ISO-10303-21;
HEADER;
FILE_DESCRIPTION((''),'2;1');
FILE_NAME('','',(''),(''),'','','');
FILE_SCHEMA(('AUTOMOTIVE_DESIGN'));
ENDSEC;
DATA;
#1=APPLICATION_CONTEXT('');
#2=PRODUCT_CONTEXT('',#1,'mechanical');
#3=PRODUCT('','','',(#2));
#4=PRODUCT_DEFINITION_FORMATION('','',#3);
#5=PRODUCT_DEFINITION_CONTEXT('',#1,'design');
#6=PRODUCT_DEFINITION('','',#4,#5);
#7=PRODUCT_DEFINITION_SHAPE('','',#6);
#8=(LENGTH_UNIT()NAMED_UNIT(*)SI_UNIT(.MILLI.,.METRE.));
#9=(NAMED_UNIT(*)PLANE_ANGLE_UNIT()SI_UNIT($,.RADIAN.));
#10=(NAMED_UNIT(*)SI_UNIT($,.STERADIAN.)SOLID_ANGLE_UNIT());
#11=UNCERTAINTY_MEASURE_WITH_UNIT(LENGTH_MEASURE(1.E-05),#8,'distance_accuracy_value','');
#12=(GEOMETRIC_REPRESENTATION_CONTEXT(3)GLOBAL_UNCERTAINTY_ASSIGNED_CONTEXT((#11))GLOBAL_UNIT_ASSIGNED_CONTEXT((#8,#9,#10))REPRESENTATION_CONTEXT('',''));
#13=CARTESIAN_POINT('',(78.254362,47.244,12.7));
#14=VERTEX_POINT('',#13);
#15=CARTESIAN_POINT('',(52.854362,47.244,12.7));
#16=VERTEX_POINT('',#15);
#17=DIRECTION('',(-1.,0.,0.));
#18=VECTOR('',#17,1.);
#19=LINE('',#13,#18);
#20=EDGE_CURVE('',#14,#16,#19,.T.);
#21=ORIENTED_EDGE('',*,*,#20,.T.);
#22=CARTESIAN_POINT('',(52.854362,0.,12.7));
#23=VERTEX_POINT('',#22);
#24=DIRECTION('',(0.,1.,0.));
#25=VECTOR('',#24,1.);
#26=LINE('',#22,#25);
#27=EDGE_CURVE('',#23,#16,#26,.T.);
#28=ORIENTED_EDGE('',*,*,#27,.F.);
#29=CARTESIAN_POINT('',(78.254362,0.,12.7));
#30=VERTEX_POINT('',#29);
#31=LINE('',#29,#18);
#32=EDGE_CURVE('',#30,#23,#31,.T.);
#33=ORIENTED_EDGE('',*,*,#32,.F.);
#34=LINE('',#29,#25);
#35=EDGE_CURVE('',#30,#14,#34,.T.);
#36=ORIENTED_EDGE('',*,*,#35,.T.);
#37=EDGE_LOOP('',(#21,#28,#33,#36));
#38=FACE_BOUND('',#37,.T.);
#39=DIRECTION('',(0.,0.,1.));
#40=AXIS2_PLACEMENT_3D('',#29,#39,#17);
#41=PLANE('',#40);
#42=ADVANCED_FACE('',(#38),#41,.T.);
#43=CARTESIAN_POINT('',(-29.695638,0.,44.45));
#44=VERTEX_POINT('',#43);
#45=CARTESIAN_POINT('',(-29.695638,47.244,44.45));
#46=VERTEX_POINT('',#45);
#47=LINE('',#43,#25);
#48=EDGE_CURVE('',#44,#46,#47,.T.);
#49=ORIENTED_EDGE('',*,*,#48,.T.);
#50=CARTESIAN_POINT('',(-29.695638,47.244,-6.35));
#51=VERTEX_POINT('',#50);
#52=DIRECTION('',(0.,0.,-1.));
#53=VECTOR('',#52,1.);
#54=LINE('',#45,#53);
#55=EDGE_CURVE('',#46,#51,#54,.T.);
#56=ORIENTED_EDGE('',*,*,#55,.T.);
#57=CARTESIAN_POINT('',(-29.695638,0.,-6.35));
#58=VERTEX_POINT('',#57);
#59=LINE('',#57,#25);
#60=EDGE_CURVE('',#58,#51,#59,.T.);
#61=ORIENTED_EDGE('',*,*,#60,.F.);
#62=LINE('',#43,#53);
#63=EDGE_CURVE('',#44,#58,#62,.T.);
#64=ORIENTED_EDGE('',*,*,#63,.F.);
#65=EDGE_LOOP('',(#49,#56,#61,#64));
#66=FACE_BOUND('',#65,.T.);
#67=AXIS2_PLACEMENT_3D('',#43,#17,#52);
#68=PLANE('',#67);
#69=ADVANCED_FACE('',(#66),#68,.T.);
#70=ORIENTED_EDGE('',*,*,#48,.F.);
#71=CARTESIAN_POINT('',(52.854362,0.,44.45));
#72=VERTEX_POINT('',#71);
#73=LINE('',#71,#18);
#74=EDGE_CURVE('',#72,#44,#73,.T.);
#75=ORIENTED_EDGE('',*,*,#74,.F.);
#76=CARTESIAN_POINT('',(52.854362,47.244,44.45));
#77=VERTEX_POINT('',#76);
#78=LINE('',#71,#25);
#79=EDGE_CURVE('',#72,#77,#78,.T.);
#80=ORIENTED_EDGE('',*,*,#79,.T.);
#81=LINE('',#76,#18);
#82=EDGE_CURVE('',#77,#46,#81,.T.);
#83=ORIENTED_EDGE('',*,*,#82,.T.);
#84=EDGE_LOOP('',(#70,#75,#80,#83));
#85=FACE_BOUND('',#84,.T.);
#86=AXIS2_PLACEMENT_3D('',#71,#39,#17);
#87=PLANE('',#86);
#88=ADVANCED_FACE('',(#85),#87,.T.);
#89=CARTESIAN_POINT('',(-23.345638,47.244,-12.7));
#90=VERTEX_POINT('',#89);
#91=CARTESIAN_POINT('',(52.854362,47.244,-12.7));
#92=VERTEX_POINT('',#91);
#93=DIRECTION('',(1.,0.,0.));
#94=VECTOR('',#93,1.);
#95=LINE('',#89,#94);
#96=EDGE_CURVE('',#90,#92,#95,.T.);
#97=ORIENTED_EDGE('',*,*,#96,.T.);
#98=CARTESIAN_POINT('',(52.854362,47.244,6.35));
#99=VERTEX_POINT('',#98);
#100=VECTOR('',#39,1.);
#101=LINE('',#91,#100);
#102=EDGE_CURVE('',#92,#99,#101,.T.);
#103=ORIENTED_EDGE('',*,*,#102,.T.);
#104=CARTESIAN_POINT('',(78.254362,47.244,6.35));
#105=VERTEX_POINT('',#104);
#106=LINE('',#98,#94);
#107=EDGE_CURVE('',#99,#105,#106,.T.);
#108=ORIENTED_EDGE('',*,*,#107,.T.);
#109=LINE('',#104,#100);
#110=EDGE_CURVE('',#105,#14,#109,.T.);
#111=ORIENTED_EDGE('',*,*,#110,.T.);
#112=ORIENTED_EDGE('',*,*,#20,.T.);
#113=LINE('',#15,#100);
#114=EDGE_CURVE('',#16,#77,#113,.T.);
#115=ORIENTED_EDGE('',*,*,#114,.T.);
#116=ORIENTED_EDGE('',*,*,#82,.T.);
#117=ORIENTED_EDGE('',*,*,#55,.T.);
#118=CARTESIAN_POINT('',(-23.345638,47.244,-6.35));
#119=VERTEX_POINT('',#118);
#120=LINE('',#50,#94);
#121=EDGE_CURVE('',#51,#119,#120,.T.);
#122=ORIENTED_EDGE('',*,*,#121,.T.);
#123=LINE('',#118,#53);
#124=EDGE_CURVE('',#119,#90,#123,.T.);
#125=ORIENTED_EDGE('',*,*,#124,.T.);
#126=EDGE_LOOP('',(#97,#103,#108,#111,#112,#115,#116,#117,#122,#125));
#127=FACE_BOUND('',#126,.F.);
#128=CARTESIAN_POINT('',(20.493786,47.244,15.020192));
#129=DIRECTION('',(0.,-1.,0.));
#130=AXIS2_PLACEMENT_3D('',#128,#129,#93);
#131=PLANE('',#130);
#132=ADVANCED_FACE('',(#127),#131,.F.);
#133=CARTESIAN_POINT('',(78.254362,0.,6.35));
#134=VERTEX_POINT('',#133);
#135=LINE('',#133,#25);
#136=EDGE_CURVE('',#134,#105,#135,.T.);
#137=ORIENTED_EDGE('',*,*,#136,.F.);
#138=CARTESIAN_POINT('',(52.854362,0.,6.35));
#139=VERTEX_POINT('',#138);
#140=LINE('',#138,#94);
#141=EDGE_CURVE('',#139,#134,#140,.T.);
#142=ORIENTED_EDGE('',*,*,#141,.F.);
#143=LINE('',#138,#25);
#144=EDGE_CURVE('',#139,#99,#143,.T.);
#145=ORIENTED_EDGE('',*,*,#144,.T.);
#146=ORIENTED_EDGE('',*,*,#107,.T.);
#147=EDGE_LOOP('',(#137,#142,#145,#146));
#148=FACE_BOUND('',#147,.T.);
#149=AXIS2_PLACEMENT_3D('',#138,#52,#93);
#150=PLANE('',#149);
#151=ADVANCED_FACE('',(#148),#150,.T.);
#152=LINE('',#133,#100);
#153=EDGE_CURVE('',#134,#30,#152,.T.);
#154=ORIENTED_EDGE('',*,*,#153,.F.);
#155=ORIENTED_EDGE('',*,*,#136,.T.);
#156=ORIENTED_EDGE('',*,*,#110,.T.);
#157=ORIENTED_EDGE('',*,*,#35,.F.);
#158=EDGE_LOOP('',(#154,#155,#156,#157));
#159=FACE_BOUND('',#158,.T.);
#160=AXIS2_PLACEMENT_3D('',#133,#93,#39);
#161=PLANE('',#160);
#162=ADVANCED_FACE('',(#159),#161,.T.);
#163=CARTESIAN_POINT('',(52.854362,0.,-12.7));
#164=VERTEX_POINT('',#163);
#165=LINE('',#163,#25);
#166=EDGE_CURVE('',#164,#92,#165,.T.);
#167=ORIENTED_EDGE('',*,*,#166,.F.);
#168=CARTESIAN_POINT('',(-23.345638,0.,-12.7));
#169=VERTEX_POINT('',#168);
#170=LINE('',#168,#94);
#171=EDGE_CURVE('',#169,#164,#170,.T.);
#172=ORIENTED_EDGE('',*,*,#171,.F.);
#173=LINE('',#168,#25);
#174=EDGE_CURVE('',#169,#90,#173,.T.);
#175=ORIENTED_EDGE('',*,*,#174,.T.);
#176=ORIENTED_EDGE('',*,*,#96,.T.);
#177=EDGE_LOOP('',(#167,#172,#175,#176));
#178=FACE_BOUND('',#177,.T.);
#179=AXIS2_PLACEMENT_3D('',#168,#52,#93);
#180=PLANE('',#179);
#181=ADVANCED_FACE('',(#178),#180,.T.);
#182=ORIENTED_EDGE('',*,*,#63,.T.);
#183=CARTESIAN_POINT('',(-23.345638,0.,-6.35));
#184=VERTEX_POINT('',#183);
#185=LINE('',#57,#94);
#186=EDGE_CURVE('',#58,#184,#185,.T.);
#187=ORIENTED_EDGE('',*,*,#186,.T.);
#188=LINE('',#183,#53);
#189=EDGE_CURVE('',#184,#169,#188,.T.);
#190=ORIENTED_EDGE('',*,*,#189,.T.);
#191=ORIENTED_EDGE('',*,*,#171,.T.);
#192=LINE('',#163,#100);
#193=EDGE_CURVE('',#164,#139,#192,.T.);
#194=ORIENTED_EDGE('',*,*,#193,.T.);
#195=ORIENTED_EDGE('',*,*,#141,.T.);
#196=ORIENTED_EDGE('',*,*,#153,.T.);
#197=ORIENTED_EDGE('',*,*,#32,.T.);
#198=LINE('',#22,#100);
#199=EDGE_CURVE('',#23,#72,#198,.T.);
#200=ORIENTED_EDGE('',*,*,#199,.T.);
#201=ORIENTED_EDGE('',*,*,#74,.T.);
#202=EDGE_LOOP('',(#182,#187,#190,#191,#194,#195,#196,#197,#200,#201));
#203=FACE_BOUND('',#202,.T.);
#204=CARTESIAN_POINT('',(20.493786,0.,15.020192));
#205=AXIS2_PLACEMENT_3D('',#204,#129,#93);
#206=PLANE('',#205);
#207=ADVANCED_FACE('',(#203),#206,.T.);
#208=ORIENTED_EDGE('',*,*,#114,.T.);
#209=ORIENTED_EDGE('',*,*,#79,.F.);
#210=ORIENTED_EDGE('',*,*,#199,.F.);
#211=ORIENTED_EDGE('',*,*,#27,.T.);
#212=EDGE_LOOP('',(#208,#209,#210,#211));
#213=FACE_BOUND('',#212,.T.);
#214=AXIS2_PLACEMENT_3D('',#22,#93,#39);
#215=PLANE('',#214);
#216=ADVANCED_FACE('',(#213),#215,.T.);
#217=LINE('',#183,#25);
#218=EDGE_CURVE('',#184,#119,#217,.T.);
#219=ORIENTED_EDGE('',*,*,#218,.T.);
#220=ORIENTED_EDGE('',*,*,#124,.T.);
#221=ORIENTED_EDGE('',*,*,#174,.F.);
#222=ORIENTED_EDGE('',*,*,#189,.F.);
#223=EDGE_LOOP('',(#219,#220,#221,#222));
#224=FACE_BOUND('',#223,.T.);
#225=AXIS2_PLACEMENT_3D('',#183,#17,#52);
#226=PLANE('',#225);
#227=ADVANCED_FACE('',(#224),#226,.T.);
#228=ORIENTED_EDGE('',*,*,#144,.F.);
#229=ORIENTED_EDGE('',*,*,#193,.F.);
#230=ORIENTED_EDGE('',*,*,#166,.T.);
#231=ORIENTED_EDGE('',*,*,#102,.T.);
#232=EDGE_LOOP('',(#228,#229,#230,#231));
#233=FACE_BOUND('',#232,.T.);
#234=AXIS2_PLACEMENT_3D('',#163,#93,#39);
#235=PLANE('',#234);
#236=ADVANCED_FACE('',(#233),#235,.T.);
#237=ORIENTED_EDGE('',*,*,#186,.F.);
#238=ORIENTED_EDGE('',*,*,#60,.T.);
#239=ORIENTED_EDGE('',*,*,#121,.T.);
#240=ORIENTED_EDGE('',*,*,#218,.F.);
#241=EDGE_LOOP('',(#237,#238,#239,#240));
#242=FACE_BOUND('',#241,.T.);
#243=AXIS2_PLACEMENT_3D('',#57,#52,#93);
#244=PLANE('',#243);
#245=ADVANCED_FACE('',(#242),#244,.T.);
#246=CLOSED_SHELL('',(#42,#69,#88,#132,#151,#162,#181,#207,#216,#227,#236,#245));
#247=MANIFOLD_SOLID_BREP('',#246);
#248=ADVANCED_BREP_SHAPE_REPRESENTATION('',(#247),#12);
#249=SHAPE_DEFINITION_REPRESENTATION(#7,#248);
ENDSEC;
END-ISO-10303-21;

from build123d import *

# Parameters (mm, degrees)
F6_DEPTH = 47.244


# Not quite as in the source:
# - a feature of the source that left no trace in its solid (it failed there, or was rolled back) is left out


with BuildPart() as f6:
    # F0 (on Front) → F6 (new body)
    with BuildSketch(Plane.XZ):
        Polygon((52.8543624759, 44.45), (-29.6956375241, 44.45), (-29.6956375241, -6.35), (-23.3456375241, -6.35), (-23.3456375241, -12.7), (52.8543624759, -12.7), (52.8543624759, 6.35), (78.2543624759, 6.35), (78.2543624759, 12.7), (52.8543624759, 12.7), align=None)
    extrude(amount=-F6_DEPTH)


solid = f6.part
